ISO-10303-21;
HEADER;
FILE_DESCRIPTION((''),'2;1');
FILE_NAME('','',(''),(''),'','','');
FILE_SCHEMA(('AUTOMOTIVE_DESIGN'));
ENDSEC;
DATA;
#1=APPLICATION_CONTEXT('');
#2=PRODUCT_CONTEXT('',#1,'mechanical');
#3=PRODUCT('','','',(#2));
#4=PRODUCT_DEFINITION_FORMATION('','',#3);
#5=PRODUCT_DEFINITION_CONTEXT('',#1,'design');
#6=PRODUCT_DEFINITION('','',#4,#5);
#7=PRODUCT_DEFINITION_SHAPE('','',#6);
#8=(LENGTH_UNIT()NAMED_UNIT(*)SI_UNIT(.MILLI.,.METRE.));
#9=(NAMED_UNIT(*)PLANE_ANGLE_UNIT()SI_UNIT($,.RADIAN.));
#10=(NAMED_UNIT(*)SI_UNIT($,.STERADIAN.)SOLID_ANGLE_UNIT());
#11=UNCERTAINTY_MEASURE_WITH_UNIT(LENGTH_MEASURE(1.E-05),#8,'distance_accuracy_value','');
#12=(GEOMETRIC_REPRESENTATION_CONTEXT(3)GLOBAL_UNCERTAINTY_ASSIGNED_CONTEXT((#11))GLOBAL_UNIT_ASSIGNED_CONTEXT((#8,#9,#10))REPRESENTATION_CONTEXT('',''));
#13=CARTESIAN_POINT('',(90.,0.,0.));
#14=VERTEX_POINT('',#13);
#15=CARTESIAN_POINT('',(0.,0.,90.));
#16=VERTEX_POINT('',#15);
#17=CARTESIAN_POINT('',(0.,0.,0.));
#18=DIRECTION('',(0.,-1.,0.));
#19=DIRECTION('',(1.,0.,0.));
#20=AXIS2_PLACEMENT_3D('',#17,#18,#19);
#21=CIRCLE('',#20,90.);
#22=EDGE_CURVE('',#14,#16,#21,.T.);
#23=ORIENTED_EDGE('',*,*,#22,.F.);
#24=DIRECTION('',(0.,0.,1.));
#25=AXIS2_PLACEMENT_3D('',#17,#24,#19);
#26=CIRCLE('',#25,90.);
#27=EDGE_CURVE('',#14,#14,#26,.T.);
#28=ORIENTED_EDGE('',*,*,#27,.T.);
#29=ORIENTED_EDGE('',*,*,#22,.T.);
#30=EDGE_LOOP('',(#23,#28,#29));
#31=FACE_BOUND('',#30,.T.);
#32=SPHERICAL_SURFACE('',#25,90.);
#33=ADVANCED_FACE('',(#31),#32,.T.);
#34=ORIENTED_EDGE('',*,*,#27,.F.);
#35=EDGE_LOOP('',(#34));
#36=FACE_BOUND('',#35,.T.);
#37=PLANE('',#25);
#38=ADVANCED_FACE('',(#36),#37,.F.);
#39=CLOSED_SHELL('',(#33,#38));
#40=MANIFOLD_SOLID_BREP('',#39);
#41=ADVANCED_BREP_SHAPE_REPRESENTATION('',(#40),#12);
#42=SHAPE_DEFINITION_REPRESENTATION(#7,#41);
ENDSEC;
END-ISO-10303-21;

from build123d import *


# Not quite as in the source:
# - the program builds the solid bodies; features that only make, move or delete a surface that nothing else refers to are left out


with BuildPart() as f1:
    # F0 (on Front) → F1 (revolve)
    with BuildSketch(Plane.XZ):
        with BuildLine():
            Line((0, 0), (90, 0))
            ThreePointArc((90, 0), (63.6396103068, 63.6396103068), (0, 90))
            Line((0, 90), (0, 0))
        make_face()
    revolve(axis=Axis((0, 0, 45), (0, 0, 1)))


solid = f1.part
